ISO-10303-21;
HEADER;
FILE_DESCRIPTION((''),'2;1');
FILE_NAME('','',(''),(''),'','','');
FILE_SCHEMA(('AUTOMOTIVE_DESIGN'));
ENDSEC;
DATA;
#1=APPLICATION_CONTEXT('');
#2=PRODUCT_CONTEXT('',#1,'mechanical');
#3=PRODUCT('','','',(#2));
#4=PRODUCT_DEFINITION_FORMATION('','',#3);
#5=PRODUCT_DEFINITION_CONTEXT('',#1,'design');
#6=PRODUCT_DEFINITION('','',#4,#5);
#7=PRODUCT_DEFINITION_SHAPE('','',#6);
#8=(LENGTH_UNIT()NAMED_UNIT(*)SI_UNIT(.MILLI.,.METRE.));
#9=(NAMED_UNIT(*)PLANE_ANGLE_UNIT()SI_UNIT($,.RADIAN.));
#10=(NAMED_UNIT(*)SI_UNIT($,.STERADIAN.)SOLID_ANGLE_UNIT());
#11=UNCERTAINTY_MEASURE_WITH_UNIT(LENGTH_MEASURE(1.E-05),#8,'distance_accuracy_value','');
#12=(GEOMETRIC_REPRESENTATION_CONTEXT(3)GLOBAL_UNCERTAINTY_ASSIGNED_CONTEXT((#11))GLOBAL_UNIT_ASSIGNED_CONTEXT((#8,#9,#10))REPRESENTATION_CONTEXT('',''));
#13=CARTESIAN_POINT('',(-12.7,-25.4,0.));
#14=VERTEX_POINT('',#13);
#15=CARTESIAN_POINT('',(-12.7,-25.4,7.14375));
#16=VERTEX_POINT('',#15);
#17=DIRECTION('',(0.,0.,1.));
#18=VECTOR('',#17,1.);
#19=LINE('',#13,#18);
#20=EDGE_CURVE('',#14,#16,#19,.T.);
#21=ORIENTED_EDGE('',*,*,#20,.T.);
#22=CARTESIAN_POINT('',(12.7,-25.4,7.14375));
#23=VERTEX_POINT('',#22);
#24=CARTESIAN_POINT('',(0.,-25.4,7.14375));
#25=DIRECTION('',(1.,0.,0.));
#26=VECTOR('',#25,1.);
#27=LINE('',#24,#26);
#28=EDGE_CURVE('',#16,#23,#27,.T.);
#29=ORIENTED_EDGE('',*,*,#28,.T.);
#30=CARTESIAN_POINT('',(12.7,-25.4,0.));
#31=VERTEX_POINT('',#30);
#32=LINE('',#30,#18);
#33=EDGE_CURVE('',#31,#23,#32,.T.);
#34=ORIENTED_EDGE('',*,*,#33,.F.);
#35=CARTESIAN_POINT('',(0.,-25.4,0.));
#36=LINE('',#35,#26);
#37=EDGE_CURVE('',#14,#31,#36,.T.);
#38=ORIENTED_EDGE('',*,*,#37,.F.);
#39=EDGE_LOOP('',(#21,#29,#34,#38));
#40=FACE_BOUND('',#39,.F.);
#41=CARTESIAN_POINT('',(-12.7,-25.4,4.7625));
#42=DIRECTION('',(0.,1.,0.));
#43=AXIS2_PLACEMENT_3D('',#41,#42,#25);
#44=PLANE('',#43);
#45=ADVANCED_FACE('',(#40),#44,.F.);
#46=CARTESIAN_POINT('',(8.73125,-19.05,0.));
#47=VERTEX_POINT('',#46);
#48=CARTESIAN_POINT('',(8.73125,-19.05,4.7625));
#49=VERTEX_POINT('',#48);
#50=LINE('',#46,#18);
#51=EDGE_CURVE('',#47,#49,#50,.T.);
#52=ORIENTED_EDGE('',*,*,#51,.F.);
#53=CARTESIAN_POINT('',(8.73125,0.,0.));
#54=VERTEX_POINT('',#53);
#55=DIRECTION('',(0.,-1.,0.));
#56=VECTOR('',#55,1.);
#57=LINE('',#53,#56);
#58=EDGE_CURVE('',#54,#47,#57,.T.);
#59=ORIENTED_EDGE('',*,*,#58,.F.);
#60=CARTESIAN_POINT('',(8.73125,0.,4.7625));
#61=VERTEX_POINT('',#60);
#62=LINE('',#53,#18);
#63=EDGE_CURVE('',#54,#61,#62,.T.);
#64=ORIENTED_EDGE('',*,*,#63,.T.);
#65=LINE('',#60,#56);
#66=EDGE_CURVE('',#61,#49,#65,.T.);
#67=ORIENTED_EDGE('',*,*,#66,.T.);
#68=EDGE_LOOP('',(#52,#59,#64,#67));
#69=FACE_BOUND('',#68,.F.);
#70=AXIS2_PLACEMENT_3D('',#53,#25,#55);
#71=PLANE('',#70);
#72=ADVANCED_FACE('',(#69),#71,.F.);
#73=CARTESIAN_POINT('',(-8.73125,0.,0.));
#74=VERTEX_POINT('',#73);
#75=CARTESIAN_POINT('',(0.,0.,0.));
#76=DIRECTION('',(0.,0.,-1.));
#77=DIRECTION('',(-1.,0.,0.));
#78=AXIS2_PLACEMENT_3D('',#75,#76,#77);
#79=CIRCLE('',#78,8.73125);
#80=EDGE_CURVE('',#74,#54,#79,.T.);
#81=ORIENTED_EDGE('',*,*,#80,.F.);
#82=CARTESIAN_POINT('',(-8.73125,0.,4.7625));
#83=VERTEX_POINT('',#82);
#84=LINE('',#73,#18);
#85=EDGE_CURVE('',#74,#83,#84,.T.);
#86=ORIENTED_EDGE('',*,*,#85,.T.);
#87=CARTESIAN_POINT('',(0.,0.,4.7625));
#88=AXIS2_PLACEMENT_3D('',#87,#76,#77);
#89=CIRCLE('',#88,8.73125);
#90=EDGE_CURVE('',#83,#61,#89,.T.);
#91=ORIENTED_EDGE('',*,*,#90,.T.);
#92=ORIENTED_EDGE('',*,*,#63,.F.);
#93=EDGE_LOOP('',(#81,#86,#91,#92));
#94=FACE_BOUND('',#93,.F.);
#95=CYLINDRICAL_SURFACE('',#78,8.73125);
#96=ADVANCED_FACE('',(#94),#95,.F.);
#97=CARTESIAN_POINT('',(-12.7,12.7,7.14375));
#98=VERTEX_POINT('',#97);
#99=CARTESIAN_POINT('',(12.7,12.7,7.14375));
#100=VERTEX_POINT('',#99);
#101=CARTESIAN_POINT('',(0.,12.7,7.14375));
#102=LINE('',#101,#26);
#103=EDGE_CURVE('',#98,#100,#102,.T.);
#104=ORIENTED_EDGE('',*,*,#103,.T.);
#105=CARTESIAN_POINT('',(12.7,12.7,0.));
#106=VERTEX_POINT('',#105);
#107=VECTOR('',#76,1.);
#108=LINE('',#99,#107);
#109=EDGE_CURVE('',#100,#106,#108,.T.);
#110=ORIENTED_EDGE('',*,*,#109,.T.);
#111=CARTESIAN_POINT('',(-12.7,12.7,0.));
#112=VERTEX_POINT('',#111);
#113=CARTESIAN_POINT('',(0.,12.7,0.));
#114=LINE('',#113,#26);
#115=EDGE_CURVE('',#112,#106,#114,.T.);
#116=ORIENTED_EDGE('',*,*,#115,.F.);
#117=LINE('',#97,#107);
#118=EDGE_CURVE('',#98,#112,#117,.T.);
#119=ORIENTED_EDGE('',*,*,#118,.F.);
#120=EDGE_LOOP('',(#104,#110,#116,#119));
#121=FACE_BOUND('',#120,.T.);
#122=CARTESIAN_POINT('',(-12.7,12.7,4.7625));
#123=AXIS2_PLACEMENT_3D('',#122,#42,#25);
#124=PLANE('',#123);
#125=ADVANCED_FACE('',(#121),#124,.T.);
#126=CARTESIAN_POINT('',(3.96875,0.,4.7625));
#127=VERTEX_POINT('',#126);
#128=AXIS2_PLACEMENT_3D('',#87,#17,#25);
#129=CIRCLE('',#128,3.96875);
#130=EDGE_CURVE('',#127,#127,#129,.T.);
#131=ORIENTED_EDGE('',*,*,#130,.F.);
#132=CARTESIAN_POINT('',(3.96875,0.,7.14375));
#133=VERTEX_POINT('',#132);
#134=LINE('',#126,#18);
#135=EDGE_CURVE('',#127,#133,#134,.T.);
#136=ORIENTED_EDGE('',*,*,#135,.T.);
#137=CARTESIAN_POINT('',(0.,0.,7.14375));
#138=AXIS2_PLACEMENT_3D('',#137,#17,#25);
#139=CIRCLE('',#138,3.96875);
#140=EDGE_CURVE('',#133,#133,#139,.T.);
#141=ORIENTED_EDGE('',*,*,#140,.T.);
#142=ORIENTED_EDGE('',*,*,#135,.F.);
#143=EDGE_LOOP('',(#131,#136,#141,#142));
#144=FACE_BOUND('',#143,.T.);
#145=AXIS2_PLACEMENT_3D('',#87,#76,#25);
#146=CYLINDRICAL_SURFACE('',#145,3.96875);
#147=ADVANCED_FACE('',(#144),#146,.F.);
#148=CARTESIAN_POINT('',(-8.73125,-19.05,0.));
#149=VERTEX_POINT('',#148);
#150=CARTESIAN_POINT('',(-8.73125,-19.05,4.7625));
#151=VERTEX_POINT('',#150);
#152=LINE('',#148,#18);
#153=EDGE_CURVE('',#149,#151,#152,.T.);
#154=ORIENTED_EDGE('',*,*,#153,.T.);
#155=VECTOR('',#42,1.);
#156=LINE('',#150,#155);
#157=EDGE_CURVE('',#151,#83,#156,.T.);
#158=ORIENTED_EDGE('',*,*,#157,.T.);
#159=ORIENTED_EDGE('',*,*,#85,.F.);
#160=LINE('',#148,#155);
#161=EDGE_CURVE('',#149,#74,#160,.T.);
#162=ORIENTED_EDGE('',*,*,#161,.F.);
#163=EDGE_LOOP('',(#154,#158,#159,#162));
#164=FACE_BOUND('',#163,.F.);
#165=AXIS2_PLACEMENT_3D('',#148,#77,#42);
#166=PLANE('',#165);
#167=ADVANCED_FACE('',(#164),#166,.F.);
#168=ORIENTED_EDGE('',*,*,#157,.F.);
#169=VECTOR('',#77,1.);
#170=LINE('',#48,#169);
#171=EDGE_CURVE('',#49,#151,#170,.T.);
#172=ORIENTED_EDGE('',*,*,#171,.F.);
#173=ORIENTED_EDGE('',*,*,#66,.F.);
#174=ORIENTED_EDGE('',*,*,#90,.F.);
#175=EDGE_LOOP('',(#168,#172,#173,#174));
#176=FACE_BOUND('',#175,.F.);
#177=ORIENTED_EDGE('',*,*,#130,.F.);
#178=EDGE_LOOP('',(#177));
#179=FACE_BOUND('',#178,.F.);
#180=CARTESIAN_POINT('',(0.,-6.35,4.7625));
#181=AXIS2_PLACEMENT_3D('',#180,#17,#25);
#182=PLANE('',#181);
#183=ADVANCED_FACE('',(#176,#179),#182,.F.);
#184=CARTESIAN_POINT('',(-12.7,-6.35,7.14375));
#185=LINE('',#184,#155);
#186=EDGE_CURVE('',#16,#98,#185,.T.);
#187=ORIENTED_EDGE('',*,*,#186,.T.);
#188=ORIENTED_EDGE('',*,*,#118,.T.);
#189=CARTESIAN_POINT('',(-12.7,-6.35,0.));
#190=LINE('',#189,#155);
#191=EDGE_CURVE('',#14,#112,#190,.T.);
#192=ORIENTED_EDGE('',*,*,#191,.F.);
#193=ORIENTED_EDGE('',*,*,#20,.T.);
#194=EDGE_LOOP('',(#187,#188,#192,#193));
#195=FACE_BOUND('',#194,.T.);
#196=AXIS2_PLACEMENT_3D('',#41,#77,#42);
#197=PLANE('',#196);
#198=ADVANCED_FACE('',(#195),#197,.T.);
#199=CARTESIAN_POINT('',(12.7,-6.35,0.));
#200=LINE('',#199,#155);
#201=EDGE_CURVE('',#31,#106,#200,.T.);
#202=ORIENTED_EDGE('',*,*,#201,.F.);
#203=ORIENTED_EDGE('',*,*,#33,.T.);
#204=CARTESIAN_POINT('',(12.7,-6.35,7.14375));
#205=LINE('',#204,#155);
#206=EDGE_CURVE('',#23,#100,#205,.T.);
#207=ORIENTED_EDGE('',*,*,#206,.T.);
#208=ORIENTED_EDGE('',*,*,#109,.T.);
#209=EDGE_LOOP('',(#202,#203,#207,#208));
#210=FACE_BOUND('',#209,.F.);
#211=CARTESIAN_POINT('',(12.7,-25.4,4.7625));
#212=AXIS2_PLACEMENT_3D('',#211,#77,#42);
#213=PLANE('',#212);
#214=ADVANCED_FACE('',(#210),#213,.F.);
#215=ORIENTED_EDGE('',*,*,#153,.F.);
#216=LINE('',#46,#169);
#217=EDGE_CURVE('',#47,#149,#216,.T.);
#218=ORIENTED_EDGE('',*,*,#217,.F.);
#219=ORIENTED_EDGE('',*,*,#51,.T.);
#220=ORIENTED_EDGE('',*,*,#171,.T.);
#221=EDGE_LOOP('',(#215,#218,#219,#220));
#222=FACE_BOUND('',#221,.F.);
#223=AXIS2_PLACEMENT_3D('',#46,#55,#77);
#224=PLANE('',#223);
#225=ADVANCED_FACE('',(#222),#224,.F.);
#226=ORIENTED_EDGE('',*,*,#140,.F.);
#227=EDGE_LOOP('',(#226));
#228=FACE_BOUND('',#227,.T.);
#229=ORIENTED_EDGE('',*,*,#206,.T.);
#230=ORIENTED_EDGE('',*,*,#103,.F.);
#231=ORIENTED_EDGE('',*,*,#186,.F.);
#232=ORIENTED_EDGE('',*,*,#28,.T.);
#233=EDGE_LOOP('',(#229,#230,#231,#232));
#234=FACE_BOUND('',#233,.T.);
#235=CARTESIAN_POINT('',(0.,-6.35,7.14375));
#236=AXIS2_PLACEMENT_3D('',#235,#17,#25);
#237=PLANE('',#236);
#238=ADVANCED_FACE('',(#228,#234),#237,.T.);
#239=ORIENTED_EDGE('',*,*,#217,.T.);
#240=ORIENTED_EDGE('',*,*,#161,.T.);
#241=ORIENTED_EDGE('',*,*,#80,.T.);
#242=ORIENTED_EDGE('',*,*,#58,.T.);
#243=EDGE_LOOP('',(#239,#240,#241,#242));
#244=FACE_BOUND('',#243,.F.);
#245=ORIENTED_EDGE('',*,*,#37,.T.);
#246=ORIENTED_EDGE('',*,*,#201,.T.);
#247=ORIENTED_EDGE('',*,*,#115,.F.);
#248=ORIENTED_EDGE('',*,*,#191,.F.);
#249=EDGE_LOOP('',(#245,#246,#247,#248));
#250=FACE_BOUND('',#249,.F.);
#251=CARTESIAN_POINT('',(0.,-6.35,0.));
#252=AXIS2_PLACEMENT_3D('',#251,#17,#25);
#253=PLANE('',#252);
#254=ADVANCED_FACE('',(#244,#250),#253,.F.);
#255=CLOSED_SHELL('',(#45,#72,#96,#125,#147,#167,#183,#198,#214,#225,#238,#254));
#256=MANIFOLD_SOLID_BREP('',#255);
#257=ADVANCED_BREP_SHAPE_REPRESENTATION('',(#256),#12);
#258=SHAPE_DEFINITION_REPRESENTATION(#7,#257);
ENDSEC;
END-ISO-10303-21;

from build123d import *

# Parameters (mm, degrees)
F0_W     = 25.4
F0_H     = 38.1
F1_DEPTH = 4.7625
F2_W     = 25.4
F2_H     = 38.1
F2_R     = 3.96875
F3_DEPTH = 2.38125


# Not quite as in the source:
# - a length typed as a fraction of an inch, garbled in the dataset ("3 / 203.2 mm" for 3/8 in), is restored


with BuildPart() as f1:
    # F0 (on Top) → F1 (new body)
    with BuildSketch(Plane.XY):
        with Locations((0, -6.35)):
            Rectangle(F0_W, F0_H)
        with BuildLine():
            ThreePointArc((-8.73125, 0), (0, 8.73125), (8.73125, 0))
            Line((8.73125, 0), (8.73125, -19.05))
            Line((8.73125, -19.05), (-8.73125, -19.05))
            Line((-8.73125, -19.05), (-8.73125, 0))
        make_face(mode=Mode.SUBTRACT)
    extrude(amount=F1_DEPTH)

    # F2 (on face) → F3 (join)
    with BuildSketch(Plane.XY.offset(4.7625)):
        with Locations((0, -6.35)):
            Rectangle(F2_W, F2_H)
        Circle(F2_R, mode=Mode.SUBTRACT)
    extrude(amount=F3_DEPTH)


solid = f1.part
